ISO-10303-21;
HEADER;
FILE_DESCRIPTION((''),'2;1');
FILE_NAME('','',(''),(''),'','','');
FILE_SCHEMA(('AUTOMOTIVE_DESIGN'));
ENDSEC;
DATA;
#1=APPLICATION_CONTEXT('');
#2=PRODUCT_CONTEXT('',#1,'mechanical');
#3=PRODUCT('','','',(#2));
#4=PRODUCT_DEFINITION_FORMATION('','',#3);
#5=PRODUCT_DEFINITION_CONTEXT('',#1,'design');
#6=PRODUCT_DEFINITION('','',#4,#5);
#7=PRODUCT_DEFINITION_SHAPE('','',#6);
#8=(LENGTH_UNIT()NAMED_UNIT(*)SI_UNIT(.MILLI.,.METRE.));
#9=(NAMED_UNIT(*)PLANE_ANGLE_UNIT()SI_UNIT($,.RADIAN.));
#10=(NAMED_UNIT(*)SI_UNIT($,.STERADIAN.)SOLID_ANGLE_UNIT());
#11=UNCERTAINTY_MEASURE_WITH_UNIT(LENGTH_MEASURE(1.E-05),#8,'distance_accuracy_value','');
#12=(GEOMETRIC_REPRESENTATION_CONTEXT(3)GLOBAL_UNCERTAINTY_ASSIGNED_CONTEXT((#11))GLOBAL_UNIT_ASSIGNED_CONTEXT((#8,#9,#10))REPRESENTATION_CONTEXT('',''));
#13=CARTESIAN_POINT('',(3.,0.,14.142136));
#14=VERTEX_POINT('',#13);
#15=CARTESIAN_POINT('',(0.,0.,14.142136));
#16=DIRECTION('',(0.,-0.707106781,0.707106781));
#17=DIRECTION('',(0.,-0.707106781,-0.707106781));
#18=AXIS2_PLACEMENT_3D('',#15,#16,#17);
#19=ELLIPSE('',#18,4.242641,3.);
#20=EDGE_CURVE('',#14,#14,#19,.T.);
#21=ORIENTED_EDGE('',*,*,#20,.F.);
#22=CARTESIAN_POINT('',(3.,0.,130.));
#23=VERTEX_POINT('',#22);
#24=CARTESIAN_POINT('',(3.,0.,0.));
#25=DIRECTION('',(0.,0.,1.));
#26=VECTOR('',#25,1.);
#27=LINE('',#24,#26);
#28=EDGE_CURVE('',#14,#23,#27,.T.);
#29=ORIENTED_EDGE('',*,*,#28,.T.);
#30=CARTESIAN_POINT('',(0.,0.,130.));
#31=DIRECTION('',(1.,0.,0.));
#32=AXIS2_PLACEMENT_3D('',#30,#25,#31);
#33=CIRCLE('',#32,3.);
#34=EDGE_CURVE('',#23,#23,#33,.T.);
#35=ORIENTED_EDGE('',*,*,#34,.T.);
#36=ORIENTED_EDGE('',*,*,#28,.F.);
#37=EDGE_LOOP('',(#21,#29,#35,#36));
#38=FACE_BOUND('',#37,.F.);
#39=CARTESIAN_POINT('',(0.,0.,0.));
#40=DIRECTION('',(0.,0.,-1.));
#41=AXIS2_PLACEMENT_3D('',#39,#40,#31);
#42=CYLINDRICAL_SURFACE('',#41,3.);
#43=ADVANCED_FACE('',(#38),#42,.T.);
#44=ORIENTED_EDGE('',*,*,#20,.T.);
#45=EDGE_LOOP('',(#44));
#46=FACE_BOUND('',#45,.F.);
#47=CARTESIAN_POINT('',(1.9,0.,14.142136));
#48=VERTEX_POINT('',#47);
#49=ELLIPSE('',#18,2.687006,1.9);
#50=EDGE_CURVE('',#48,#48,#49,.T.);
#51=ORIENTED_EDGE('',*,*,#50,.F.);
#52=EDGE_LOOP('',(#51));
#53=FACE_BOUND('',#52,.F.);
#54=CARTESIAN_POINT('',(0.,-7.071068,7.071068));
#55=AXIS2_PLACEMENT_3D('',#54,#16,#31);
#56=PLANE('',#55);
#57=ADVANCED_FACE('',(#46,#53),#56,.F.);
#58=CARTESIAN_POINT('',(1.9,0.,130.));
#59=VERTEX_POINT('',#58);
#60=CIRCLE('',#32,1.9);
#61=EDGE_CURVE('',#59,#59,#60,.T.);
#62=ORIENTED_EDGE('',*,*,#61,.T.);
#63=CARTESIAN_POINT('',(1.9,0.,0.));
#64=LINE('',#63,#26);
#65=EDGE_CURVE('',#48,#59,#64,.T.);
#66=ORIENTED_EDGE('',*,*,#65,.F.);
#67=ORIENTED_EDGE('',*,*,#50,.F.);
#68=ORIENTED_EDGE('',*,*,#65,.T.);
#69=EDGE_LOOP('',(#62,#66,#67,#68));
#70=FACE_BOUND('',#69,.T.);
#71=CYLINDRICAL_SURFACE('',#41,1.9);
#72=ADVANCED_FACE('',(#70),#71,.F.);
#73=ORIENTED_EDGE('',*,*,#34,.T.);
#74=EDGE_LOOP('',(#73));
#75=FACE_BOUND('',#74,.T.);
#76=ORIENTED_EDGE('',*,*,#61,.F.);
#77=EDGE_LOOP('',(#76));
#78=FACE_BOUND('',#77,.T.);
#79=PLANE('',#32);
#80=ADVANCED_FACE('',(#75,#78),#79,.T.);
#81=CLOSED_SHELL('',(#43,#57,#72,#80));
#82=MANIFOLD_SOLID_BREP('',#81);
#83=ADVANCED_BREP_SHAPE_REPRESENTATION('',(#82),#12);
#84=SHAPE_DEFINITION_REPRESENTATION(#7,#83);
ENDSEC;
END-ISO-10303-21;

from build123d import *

# Parameters (mm, degrees)
F0_R     = 3
F1_DEPTH = 130
F2_T     = -1.1
F5_R     = 26.2587558367
F6_DEPTH = 25


with BuildPart() as f1:
    # F0 (on Top) → F1 (new body)
    with BuildSketch(Plane.XY):
        Circle(F0_R)
    extrude(amount=F1_DEPTH)

    # F2
    f2_openings = [f1.faces().sort_by_distance(p)[0] for p in [
        (0, 0, 130),
    ]]
    offset(amount=F2_T, openings=f2_openings)

    # F5 (on face) → F6 (cut)
    with BuildSketch(Plane(origin=(0, -7.0710678119, 7.0710678119), x_dir=(1, 0, 0), z_dir=(0, -0.7071067812, 0.7071067812))):
        Circle(F5_R)
    extrude(amount=-F6_DEPTH, mode=Mode.SUBTRACT)


solid = f1.part
